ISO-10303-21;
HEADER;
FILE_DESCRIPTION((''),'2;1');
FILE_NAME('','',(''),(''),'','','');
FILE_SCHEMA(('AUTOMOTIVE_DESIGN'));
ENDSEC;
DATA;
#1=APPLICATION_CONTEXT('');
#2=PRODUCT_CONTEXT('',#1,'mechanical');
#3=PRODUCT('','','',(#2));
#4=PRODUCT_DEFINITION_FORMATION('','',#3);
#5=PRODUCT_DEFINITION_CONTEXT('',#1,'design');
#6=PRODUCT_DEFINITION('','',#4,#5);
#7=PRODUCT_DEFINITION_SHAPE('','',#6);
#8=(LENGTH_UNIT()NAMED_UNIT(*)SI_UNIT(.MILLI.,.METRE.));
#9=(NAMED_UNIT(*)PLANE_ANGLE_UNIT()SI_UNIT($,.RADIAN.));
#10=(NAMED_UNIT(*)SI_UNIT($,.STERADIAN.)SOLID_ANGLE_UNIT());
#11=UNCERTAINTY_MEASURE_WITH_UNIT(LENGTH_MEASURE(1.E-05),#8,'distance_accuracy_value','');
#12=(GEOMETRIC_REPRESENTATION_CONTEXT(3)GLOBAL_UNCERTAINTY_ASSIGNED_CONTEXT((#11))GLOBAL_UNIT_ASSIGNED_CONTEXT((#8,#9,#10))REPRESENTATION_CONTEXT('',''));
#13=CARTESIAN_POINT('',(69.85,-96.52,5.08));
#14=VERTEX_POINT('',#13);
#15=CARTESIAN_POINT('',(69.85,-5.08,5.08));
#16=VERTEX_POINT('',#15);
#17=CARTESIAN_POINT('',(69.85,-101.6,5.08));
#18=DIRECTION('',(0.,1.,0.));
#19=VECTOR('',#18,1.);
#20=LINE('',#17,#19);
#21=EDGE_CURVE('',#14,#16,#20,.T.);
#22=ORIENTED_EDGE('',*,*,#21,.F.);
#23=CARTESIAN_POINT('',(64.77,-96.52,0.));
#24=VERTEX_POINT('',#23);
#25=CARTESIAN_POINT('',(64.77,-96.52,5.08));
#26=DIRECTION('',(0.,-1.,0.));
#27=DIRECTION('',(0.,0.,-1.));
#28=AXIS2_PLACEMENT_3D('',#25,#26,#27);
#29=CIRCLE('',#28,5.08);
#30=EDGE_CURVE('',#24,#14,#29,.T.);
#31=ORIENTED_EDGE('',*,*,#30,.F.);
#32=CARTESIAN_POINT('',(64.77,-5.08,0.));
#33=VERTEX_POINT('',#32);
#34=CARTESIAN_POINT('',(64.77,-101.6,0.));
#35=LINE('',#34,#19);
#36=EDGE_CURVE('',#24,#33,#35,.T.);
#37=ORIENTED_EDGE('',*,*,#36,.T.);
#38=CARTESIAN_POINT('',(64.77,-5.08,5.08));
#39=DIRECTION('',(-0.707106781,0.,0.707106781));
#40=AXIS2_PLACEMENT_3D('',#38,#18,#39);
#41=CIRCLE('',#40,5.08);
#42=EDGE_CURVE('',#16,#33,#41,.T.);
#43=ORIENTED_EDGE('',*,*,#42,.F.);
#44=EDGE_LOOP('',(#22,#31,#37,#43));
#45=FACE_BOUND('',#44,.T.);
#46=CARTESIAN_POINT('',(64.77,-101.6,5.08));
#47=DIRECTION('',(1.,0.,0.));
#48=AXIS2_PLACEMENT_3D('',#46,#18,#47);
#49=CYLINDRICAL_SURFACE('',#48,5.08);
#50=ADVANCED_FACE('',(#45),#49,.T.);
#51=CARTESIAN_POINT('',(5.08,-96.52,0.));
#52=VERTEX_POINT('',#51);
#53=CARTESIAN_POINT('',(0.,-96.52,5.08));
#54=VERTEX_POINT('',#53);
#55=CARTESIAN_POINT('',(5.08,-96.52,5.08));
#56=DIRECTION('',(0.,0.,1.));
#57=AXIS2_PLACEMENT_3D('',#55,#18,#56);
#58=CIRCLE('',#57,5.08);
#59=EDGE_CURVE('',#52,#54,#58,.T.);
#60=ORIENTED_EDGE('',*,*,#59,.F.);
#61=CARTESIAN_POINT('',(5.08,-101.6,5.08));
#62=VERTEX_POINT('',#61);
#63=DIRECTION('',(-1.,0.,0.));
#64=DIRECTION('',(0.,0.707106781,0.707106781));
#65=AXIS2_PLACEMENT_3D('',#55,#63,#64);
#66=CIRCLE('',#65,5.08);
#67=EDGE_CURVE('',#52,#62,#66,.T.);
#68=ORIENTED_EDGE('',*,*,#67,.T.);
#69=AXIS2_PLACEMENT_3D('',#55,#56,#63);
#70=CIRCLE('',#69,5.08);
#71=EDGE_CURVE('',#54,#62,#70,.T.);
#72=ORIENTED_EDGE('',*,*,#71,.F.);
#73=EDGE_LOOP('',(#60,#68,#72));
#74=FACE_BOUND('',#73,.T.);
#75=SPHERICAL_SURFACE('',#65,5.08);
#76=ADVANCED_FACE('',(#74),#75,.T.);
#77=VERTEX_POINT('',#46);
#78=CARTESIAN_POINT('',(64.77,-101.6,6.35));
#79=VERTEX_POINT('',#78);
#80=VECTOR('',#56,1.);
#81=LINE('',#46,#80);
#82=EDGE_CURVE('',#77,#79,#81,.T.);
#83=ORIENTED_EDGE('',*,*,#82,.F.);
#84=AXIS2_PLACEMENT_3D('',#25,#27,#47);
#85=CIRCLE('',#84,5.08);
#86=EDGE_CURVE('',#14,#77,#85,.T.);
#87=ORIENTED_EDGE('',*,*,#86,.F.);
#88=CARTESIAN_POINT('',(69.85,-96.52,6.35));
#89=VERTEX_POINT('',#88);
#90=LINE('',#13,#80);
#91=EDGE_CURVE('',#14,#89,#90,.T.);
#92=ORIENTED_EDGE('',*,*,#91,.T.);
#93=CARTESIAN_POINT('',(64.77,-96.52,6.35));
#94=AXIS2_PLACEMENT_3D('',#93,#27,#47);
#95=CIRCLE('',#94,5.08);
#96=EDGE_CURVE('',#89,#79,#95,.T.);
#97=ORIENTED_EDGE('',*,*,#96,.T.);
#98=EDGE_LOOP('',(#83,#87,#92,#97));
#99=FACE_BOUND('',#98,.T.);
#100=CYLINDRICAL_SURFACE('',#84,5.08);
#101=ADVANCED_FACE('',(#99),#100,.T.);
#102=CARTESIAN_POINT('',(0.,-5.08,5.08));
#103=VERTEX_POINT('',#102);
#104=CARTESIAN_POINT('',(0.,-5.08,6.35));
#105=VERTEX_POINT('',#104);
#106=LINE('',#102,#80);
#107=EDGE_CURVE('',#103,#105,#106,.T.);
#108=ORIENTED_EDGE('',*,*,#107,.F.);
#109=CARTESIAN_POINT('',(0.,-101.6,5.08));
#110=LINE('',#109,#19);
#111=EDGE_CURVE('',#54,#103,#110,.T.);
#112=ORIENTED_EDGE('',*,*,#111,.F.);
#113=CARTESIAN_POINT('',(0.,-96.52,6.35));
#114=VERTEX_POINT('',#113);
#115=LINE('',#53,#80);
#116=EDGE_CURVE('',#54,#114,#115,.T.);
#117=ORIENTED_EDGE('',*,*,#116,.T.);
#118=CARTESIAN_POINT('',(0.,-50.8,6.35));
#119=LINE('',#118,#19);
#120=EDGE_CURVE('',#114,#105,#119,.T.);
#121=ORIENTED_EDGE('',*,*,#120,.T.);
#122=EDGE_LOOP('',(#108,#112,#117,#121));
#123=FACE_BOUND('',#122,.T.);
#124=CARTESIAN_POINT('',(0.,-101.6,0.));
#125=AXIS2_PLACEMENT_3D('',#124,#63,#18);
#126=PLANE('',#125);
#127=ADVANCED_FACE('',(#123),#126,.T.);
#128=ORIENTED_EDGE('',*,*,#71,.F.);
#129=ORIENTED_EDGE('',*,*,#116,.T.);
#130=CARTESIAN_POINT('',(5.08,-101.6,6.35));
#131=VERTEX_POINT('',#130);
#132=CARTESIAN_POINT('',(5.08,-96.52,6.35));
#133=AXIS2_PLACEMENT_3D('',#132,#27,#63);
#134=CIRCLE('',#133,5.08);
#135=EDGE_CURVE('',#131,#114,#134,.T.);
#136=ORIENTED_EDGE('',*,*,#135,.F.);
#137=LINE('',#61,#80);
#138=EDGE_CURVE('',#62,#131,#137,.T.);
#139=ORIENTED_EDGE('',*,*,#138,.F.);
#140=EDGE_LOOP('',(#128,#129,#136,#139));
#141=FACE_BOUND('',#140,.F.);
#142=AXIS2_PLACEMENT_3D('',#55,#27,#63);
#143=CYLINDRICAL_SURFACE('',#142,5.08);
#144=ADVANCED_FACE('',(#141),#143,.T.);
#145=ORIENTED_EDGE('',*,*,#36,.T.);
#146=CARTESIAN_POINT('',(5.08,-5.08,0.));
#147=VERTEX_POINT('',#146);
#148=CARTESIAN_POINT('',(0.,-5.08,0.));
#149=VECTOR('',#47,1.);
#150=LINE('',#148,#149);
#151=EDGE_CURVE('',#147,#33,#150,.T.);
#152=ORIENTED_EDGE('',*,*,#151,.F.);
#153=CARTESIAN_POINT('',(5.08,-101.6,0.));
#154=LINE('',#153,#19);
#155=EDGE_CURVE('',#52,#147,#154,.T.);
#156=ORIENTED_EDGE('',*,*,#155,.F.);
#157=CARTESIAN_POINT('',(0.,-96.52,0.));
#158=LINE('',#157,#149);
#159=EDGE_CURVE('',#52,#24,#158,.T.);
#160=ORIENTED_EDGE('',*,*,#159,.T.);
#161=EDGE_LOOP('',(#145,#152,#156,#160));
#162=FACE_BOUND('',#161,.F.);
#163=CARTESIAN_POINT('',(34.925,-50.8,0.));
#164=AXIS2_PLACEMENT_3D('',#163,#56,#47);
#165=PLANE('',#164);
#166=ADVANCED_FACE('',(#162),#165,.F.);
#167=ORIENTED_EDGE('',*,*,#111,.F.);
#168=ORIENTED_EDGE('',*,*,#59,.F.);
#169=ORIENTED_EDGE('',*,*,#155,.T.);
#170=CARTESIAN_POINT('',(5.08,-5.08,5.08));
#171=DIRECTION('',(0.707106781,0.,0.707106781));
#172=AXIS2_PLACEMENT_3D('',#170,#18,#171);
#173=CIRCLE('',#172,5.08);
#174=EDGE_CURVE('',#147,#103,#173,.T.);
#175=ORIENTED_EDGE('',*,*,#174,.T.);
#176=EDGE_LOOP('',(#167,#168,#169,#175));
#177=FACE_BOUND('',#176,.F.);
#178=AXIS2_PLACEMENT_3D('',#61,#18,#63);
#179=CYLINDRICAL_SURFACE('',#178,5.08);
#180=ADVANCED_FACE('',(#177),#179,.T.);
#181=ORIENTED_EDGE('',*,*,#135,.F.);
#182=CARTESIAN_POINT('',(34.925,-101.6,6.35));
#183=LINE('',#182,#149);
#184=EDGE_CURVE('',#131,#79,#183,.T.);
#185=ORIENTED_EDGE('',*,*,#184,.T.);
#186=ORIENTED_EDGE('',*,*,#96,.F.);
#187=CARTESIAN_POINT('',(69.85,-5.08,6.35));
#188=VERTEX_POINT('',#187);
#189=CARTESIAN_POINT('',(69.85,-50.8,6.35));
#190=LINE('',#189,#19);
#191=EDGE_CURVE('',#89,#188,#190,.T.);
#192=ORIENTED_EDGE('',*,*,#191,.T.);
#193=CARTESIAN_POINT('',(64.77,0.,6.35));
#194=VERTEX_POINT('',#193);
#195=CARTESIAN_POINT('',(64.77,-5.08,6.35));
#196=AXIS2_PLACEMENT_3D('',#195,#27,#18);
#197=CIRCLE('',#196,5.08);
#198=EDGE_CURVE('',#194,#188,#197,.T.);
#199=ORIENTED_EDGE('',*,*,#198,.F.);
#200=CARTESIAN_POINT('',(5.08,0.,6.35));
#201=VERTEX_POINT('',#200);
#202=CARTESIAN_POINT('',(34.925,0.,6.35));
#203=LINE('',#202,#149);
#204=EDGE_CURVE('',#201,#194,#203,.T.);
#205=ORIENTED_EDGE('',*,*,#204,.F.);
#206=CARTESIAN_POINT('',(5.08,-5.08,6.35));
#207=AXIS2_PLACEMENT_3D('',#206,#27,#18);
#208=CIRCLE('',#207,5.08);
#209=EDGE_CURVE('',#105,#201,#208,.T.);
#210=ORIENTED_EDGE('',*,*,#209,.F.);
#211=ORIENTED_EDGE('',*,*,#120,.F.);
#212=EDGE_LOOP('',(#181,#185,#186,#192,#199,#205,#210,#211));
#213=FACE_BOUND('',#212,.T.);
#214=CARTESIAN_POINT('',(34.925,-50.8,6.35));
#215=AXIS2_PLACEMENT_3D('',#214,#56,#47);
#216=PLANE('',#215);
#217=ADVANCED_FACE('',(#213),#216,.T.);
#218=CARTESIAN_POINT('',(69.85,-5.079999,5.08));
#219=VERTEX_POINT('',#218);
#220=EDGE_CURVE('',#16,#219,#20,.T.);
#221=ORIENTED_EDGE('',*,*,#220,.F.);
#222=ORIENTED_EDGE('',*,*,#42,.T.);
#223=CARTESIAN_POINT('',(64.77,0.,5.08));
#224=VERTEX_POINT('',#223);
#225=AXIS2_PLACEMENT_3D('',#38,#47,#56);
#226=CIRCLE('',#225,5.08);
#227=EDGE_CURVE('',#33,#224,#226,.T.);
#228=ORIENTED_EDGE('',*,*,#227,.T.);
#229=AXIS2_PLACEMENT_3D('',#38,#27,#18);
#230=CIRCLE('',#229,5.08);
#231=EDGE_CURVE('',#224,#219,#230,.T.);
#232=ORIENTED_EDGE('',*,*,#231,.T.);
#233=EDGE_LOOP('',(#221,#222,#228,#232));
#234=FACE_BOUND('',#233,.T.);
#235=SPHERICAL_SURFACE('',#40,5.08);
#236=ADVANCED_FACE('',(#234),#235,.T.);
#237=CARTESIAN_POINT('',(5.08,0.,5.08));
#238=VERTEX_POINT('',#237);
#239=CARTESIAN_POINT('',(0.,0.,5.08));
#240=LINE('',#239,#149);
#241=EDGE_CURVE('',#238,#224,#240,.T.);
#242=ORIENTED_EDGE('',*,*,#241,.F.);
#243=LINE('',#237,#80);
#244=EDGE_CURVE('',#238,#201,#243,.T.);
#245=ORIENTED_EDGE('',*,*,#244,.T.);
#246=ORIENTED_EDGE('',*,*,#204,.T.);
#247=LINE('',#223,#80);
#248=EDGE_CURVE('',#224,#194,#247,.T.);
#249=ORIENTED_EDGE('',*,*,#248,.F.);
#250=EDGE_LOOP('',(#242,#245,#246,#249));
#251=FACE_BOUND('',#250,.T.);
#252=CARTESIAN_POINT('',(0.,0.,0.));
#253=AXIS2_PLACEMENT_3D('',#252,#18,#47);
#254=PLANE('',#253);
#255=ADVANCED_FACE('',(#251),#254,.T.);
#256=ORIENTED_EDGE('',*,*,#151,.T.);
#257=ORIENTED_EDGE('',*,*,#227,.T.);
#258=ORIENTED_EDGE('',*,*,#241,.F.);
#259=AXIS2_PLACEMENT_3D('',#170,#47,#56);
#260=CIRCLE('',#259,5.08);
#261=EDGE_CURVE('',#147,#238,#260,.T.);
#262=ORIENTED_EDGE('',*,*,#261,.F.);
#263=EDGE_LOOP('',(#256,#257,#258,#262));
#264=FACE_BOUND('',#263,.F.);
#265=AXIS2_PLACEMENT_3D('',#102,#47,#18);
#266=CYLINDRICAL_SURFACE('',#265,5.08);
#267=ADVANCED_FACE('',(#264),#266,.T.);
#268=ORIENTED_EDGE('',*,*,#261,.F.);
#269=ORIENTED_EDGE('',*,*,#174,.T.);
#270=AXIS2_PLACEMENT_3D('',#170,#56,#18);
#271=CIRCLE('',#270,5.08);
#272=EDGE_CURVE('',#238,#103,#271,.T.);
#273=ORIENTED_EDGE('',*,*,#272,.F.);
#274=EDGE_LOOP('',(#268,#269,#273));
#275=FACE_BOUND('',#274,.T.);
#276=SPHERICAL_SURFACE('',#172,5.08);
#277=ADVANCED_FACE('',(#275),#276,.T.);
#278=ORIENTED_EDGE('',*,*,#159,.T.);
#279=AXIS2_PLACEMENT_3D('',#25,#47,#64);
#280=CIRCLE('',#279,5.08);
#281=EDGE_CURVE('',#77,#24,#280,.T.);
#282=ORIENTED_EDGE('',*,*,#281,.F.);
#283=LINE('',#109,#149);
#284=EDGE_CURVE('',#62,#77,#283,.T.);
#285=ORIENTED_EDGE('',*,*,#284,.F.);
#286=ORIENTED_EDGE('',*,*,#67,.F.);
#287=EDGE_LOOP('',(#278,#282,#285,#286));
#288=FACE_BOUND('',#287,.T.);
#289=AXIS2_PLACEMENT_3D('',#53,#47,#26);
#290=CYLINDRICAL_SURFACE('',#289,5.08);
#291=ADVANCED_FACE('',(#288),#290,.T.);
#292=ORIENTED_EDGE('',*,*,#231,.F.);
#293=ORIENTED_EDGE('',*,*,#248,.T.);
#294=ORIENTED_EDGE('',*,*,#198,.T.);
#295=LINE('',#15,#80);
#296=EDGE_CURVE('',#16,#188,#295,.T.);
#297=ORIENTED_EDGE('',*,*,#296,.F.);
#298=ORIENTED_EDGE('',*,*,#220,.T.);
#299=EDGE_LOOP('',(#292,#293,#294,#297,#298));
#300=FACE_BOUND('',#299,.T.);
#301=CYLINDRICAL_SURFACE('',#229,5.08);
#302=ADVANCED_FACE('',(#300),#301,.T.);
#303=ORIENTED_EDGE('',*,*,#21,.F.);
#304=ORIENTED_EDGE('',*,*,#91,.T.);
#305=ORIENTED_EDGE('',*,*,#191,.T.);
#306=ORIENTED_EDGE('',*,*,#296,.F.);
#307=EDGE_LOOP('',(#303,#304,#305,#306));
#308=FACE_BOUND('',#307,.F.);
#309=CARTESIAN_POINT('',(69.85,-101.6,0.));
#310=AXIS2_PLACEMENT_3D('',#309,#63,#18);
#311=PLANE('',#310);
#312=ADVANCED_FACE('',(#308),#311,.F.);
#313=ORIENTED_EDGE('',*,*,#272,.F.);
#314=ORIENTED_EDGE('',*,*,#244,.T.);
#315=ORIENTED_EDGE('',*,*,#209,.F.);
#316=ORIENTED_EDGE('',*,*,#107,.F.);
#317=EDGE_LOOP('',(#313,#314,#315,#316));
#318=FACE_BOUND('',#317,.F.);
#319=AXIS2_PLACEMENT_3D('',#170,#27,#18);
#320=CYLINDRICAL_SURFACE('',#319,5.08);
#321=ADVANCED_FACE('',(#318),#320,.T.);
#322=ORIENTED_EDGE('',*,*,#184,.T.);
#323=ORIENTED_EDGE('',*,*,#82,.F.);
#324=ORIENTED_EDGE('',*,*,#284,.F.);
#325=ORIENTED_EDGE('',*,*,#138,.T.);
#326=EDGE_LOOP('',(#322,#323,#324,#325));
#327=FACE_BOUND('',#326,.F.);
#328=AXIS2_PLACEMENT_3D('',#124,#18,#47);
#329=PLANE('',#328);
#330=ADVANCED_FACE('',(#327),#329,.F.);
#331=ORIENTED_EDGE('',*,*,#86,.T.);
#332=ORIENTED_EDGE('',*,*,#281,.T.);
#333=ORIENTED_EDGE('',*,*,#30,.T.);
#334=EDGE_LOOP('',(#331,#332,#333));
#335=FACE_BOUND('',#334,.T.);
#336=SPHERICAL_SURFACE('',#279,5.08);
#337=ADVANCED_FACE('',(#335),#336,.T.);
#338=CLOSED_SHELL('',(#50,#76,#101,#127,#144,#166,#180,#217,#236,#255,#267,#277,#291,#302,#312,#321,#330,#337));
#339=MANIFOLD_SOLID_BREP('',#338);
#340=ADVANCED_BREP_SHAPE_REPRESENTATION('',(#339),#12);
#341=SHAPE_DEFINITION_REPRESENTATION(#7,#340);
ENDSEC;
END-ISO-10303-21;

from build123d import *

# Parameters (mm, degrees)
F0_W         = 69.85
F0_H         = 101.6
F1_DEPTH     = 6.35
F2_R         = 5.08
F3_T1_DEPTH  = 13.97
F3_S5_W      = 5.08
F3_S5_H      = 5.08
F3_T6_DEPTH  = 5.08
F3_S11_W     = 5.08
F3_S11_H     = 5.08
F3_T12_DEPTH = 5.08
F3_S17_W     = 5.08
F3_S17_H     = 5.08
F3_T18_DEPTH = 5.08
F3_S23_W     = 5.08
F3_S23_H     = 5.08
F3_T24_DEPTH = 5.08


# Not quite as in the source:
# - a fillet or chamfer that OpenCascade refuses, or shapes differently, is made with other operations: its cross-section is extruded or revolved along the edge and cut away or added


with BuildPart() as f1:
    # F0 (on Top) → F1 (new body)
    with BuildSketch(Plane.XY):
        with Locations((34.925, -50.8)):
            Rectangle(F0_W, F0_H)
    extrude(amount=F1_DEPTH)

    # F2
    f2_edges = [f1.edges().sort_by_distance(p)[0] for p in [
        (69.85, -50.8, 0),
        (34.925, -101.6, 0),
        (0, -50.8, 0),
        (34.925, 0, 0),
    ]]
    fillet(f2_edges, radius=F2_R)

    # F3: fillet of radius 5.08 on 4 edges, made by hand

    # F3_s2 → F3_t1 (cut)
    with BuildSketch(Plane.XY.offset(5.08)):
        with BuildLine():
            ThreePointArc((0, -96.52), (1.4878975516, -100.1121024484), (5.08, -101.6))
            Line((5.08, -101.6), (0, -101.6))
            Line((0, -101.6), (0, -96.52))
        make_face()
        with BuildLine():
            ThreePointArc((64.77, 0), (68.3621024484, -1.4878975516), (69.85, -5.08))
            Line((69.85, -5.08), (69.85, 0))
            Line((69.85, 0), (64.77, 0))
        make_face()
        with BuildLine():
            ThreePointArc((5.08, 0), (1.4878975516, -1.4878975516), (0, -5.08))
            Line((0, -5.08), (0, 0))
            Line((0, 0), (5.08, 0))
        make_face()
        with BuildLine():
            ThreePointArc((69.85, -96.52), (68.3621024484, -100.1121024484), (64.77, -101.6))
            Line((64.77, -101.6), (69.85, -101.6))
            Line((69.85, -101.6), (69.85, -96.52))
        make_face()
    extrude(amount=F3_T1_DEPTH, mode=Mode.SUBTRACT)


with BuildPart() as f3_tool4:
    # F3_s5 → F3_t6 (new body)
    with BuildSketch(Plane.YZ.offset(64.77)):
        with Locations((-99.06, 2.54)):
            Rectangle(F3_S5_W, F3_S5_H)
    extrude(amount=F3_T6_DEPTH)

    # F3_s7 → F3_t8 (revolve, cut)
    with BuildSketch(Plane(origin=(64.77, -96.52, 5.08), x_dir=(0, 0.7071067812, 0.7071067812), z_dir=(0, 0.7071067812, -0.7071067812))):
        with BuildLine():
            ThreePointArc((0, -5.08), (5.08, 0), (0, 5.08))
            Line((0, 5.08), (0, -5.08))
        make_face()
    revolve(axis=Axis((64.77, -96.52, 5.08), (1, 0, 0)), mode=Mode.SUBTRACT)


with BuildPart() as f1_1:
    add(f1.part)

    # F3_t3: cut F3_tool4
    add(f3_tool4.part, mode=Mode.SUBTRACT)


with BuildPart() as f3_tool10:
    # F3_s11 → F3_t12 (new body)
    with BuildSketch(Plane.XZ.offset(5.08)):
        with Locations((2.54, 2.54)):
            Rectangle(F3_S11_W, F3_S11_H)
    extrude(amount=-F3_T12_DEPTH)

    # F3_s13 → F3_t14 (revolve, cut)
    with BuildSketch(Plane(origin=(5.08, -5.08, 5.08), x_dir=(0.7071067812, 0, 0.7071067812), z_dir=(-0.7071067812, 0, 0.7071067812))):
        with BuildLine():
            ThreePointArc((0, -5.08), (5.08, 0), (0, 5.08))
            Line((0, 5.08), (0, -5.08))
        make_face()
    revolve(axis=Axis((5.08, -5.08, 5.08), (0, 1, 0)), mode=Mode.SUBTRACT)


with BuildPart() as f1_2:
    add(f1_1.part)

    # F3_t9: cut F3_tool10
    add(f3_tool10.part, mode=Mode.SUBTRACT)


with BuildPart() as f3_tool16:
    # F3_s17 → F3_t18 (new body)
    with BuildSketch(Plane.XZ.offset(5.08)):
        with Locations((67.31, 2.54)):
            Rectangle(F3_S17_W, F3_S17_H)
    extrude(amount=-F3_T18_DEPTH)

    # F3_s19 → F3_t20 (revolve, cut)
    with BuildSketch(Plane(origin=(64.77, -5.08, 5.08), x_dir=(-0.7071067812, 0, 0.7071067812), z_dir=(-0.7071067812, 0, -0.7071067812))):
        with BuildLine():
            ThreePointArc((0, -5.08), (5.08, 0), (0, 5.08))
            Line((0, 5.08), (0, -5.08))
        make_face()
    revolve(axis=Axis((64.77, -5.08, 5.08), (0, 1, 0)), mode=Mode.SUBTRACT)


with BuildPart() as f1_3:
    add(f1_2.part)

    # F3_t15: cut F3_tool16
    add(f3_tool16.part, mode=Mode.SUBTRACT)


with BuildPart() as f3_tool22:
    # F3_s23 → F3_t24 (new body)
    with BuildSketch(Plane.YZ.offset(5.08)):
        with Locations((-99.06, 2.54)):
            Rectangle(F3_S23_W, F3_S23_H)
    extrude(amount=-F3_T24_DEPTH)

    # F3_s25 → F3_t26 (revolve, cut)
    with BuildSketch(Plane(origin=(5.08, -96.52, 5.08), x_dir=(0, 0.7071067812, 0.7071067812), z_dir=(0, -0.7071067812, 0.7071067812))):
        with BuildLine():
            ThreePointArc((0, -5.08), (5.08, 0), (0, 5.08))
            Line((0, 5.08), (0, -5.08))
        make_face()
    revolve(axis=Axis((5.08, -96.52, 5.08), (-1, 0, 0)), mode=Mode.SUBTRACT)


with BuildPart() as f1_4:
    add(f1_3.part)

    # F3_t21: cut F3_tool22
    add(f3_tool22.part, mode=Mode.SUBTRACT)


solid = f1_4.part
